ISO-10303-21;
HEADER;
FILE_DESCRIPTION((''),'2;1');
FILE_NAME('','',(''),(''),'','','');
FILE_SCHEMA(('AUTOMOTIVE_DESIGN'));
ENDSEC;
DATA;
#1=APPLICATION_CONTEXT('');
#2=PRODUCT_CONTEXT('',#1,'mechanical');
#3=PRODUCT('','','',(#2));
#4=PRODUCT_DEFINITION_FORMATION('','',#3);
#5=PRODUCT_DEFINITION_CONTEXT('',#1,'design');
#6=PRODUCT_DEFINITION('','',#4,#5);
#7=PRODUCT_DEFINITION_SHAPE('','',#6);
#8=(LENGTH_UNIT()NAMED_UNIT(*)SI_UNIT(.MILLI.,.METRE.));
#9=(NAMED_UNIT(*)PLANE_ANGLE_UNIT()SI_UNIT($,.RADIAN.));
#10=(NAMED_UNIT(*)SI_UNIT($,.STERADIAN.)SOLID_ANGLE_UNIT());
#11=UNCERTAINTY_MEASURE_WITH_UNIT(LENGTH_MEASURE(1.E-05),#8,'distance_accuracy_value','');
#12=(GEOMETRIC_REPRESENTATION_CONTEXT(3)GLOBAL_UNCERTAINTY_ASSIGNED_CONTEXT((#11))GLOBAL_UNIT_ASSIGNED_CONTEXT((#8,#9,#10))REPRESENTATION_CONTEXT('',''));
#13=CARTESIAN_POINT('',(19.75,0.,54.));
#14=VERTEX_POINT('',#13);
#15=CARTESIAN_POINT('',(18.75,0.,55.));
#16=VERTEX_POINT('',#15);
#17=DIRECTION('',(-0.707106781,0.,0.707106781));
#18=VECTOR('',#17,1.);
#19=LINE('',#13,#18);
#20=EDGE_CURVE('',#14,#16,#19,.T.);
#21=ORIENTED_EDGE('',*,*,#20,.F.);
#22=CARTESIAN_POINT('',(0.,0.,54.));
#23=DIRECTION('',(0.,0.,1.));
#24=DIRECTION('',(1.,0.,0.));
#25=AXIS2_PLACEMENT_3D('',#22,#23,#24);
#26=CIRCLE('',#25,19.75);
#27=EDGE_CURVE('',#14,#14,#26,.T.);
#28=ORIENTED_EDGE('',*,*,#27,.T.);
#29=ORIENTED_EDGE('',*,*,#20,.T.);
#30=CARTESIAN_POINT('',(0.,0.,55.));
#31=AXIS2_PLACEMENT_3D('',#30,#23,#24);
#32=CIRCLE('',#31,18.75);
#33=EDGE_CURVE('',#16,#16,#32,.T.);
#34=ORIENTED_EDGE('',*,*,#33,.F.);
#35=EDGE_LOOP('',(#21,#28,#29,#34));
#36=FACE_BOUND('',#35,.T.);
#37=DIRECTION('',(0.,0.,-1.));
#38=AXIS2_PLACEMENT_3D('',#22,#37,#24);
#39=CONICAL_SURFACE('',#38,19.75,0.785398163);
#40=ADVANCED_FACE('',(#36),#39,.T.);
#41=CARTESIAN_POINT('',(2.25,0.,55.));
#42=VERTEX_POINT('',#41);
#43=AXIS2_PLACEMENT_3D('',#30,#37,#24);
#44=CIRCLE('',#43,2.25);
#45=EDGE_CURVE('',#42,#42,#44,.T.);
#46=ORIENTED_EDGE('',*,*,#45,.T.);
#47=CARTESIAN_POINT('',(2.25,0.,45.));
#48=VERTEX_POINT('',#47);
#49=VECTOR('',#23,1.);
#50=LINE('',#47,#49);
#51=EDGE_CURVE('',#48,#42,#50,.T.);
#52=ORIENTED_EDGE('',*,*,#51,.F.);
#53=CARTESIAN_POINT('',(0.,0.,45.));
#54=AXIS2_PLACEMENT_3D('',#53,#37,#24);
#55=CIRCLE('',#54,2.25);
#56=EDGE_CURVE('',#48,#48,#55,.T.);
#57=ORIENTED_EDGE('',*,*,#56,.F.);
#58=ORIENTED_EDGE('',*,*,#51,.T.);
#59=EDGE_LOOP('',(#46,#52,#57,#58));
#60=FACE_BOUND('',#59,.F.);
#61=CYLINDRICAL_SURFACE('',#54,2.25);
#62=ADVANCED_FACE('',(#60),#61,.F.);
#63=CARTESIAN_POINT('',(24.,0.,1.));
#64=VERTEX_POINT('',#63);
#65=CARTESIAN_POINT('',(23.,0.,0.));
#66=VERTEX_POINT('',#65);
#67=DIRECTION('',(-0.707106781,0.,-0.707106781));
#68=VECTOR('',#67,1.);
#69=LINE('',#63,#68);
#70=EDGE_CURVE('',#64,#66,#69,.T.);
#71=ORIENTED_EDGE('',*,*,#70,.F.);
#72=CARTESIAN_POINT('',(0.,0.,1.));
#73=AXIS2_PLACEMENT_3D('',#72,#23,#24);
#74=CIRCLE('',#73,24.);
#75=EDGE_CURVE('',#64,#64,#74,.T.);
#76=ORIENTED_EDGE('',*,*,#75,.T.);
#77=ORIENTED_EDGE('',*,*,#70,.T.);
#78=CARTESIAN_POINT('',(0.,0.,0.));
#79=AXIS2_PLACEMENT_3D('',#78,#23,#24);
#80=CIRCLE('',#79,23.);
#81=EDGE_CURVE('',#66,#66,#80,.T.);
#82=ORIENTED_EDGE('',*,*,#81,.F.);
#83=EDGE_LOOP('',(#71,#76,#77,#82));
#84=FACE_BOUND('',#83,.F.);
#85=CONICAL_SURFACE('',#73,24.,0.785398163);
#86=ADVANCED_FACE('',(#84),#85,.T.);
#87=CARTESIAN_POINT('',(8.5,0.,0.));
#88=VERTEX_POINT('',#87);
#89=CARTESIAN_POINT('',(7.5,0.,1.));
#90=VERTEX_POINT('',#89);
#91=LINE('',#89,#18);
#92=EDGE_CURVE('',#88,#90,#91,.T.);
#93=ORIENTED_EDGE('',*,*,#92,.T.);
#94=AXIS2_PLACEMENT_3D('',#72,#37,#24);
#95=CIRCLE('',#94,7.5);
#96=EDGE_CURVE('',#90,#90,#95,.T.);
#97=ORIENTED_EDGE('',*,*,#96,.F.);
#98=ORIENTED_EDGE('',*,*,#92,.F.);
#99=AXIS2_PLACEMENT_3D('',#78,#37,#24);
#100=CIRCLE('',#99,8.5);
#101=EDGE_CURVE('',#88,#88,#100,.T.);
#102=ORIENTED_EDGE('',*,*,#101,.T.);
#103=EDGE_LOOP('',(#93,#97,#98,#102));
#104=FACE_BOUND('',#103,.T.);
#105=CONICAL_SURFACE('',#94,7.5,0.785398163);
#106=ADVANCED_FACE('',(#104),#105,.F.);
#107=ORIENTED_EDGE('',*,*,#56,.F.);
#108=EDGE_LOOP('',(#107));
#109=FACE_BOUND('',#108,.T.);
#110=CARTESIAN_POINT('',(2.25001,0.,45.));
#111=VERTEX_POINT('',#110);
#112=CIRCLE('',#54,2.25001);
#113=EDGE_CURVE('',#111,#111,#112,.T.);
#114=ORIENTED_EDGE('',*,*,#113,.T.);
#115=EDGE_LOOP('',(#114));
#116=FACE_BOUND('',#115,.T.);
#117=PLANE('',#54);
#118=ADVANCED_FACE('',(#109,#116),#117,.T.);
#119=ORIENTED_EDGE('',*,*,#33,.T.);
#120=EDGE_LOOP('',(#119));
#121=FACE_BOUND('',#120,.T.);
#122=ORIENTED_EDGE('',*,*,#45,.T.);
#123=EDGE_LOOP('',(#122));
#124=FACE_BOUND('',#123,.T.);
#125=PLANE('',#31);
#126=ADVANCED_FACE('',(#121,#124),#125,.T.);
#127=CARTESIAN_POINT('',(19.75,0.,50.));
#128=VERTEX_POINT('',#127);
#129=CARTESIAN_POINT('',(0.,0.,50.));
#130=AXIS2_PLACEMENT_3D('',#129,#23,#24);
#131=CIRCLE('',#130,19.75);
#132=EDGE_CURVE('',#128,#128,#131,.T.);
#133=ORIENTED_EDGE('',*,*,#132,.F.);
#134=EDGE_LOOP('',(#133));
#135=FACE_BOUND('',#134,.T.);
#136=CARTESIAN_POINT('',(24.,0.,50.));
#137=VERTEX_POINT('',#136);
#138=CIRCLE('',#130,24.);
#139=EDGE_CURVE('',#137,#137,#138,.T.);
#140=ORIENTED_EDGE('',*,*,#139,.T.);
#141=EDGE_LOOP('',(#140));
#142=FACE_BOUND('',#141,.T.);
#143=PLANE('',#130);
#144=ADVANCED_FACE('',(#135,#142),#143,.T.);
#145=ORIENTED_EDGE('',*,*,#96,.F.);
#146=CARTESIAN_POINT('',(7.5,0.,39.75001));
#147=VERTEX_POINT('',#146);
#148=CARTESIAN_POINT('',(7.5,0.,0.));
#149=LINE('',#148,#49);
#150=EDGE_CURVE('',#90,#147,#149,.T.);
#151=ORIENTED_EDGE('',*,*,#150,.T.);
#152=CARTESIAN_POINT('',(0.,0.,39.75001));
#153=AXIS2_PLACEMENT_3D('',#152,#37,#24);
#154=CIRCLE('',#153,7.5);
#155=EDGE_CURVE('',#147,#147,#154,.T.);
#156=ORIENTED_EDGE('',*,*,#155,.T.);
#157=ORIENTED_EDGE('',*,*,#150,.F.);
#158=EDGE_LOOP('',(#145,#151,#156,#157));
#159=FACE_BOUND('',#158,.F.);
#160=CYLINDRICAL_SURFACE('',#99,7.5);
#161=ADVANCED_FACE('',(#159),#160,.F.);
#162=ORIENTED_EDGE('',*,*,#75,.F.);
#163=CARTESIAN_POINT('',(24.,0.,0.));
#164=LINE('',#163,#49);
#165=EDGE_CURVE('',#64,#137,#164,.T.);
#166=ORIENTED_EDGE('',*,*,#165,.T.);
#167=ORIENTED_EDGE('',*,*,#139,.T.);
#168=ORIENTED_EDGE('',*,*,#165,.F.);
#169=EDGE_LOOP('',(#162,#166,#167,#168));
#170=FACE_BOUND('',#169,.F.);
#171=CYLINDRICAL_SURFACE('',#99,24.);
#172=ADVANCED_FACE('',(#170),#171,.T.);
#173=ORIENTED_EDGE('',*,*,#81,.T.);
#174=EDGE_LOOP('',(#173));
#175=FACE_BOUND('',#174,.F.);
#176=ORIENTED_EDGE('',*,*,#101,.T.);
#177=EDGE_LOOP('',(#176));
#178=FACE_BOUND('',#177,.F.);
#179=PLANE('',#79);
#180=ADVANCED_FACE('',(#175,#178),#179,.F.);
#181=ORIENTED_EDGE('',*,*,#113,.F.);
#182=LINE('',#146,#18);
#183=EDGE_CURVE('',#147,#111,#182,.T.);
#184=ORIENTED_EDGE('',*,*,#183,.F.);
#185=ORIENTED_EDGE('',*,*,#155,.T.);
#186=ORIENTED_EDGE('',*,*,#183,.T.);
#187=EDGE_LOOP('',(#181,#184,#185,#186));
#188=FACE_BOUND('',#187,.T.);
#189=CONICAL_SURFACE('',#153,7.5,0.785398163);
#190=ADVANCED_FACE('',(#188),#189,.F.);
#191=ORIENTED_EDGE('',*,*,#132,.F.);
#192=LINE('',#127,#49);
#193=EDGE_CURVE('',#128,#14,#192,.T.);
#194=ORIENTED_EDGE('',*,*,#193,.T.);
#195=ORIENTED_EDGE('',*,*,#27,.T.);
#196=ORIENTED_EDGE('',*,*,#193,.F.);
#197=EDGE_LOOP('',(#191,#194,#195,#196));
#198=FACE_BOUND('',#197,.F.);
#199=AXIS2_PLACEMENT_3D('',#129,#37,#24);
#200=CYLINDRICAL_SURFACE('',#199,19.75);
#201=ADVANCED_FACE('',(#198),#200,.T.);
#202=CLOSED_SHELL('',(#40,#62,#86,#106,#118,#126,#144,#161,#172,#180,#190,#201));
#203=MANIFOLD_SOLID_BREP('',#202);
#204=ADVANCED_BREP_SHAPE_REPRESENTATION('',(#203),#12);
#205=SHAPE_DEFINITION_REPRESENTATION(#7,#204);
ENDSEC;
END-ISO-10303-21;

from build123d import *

# Parameters (mm, degrees)
F0_R     = 24
F1_DEPTH = 50
F2_R     = 19.75
F3_DEPTH = 5
F4_R     = 7.5
F5_DEPTH = 45
F6_R     = 2.25
F7_DEPTH = 10
F8_SIZE  = 1
F9_SIZE  = 5.24999


# Not quite as in the source:
# - a fillet or chamfer is up to 0.001 mm smaller than in the source, because OpenCascade refuses the exact size


with BuildPart() as f1:
    # F0 (on Top) → F1 (new body)
    with BuildSketch(Plane.XY):
        Circle(F0_R)
    extrude(amount=F1_DEPTH)

    # F2 (on face) → F3 (join)
    with BuildSketch(Plane.XY.offset(50)):
        Circle(F2_R)
    extrude(amount=F3_DEPTH)

    # F4 (on face) → F5 (cut)
    with BuildSketch(Plane(origin=(0, 0, 0), x_dir=(1, 0, 0), z_dir=(0, 0, -1))):
        Circle(F4_R)
    extrude(amount=-F5_DEPTH, mode=Mode.SUBTRACT)

    # F6 (on face) → F7 (cut)
    with BuildSketch(Plane(origin=(0, 0, 45), x_dir=(1, 0, 0), z_dir=(0, 0, -1))):
        Circle(F6_R)
    extrude(amount=-F7_DEPTH, mode=Mode.SUBTRACT)

    # F8
    f8_edges = [f1.edges().sort_by_distance(p)[0] for p in [
        (-24, 0, 0),
        (-7.5, 0, 0),
        (-19.75, 0, 55),
    ]]
    chamfer(f8_edges, length=F8_SIZE)

    # F9 (size 5.25 in the source; OpenCascade refuses exactly that, so slightly less here)
    f9_edges = [f1.edges().sort_by_distance(p)[0] for p in [
        (-7.5, 0, 45),
    ]]
    chamfer(f9_edges, length=F9_SIZE)


solid = f1.part
